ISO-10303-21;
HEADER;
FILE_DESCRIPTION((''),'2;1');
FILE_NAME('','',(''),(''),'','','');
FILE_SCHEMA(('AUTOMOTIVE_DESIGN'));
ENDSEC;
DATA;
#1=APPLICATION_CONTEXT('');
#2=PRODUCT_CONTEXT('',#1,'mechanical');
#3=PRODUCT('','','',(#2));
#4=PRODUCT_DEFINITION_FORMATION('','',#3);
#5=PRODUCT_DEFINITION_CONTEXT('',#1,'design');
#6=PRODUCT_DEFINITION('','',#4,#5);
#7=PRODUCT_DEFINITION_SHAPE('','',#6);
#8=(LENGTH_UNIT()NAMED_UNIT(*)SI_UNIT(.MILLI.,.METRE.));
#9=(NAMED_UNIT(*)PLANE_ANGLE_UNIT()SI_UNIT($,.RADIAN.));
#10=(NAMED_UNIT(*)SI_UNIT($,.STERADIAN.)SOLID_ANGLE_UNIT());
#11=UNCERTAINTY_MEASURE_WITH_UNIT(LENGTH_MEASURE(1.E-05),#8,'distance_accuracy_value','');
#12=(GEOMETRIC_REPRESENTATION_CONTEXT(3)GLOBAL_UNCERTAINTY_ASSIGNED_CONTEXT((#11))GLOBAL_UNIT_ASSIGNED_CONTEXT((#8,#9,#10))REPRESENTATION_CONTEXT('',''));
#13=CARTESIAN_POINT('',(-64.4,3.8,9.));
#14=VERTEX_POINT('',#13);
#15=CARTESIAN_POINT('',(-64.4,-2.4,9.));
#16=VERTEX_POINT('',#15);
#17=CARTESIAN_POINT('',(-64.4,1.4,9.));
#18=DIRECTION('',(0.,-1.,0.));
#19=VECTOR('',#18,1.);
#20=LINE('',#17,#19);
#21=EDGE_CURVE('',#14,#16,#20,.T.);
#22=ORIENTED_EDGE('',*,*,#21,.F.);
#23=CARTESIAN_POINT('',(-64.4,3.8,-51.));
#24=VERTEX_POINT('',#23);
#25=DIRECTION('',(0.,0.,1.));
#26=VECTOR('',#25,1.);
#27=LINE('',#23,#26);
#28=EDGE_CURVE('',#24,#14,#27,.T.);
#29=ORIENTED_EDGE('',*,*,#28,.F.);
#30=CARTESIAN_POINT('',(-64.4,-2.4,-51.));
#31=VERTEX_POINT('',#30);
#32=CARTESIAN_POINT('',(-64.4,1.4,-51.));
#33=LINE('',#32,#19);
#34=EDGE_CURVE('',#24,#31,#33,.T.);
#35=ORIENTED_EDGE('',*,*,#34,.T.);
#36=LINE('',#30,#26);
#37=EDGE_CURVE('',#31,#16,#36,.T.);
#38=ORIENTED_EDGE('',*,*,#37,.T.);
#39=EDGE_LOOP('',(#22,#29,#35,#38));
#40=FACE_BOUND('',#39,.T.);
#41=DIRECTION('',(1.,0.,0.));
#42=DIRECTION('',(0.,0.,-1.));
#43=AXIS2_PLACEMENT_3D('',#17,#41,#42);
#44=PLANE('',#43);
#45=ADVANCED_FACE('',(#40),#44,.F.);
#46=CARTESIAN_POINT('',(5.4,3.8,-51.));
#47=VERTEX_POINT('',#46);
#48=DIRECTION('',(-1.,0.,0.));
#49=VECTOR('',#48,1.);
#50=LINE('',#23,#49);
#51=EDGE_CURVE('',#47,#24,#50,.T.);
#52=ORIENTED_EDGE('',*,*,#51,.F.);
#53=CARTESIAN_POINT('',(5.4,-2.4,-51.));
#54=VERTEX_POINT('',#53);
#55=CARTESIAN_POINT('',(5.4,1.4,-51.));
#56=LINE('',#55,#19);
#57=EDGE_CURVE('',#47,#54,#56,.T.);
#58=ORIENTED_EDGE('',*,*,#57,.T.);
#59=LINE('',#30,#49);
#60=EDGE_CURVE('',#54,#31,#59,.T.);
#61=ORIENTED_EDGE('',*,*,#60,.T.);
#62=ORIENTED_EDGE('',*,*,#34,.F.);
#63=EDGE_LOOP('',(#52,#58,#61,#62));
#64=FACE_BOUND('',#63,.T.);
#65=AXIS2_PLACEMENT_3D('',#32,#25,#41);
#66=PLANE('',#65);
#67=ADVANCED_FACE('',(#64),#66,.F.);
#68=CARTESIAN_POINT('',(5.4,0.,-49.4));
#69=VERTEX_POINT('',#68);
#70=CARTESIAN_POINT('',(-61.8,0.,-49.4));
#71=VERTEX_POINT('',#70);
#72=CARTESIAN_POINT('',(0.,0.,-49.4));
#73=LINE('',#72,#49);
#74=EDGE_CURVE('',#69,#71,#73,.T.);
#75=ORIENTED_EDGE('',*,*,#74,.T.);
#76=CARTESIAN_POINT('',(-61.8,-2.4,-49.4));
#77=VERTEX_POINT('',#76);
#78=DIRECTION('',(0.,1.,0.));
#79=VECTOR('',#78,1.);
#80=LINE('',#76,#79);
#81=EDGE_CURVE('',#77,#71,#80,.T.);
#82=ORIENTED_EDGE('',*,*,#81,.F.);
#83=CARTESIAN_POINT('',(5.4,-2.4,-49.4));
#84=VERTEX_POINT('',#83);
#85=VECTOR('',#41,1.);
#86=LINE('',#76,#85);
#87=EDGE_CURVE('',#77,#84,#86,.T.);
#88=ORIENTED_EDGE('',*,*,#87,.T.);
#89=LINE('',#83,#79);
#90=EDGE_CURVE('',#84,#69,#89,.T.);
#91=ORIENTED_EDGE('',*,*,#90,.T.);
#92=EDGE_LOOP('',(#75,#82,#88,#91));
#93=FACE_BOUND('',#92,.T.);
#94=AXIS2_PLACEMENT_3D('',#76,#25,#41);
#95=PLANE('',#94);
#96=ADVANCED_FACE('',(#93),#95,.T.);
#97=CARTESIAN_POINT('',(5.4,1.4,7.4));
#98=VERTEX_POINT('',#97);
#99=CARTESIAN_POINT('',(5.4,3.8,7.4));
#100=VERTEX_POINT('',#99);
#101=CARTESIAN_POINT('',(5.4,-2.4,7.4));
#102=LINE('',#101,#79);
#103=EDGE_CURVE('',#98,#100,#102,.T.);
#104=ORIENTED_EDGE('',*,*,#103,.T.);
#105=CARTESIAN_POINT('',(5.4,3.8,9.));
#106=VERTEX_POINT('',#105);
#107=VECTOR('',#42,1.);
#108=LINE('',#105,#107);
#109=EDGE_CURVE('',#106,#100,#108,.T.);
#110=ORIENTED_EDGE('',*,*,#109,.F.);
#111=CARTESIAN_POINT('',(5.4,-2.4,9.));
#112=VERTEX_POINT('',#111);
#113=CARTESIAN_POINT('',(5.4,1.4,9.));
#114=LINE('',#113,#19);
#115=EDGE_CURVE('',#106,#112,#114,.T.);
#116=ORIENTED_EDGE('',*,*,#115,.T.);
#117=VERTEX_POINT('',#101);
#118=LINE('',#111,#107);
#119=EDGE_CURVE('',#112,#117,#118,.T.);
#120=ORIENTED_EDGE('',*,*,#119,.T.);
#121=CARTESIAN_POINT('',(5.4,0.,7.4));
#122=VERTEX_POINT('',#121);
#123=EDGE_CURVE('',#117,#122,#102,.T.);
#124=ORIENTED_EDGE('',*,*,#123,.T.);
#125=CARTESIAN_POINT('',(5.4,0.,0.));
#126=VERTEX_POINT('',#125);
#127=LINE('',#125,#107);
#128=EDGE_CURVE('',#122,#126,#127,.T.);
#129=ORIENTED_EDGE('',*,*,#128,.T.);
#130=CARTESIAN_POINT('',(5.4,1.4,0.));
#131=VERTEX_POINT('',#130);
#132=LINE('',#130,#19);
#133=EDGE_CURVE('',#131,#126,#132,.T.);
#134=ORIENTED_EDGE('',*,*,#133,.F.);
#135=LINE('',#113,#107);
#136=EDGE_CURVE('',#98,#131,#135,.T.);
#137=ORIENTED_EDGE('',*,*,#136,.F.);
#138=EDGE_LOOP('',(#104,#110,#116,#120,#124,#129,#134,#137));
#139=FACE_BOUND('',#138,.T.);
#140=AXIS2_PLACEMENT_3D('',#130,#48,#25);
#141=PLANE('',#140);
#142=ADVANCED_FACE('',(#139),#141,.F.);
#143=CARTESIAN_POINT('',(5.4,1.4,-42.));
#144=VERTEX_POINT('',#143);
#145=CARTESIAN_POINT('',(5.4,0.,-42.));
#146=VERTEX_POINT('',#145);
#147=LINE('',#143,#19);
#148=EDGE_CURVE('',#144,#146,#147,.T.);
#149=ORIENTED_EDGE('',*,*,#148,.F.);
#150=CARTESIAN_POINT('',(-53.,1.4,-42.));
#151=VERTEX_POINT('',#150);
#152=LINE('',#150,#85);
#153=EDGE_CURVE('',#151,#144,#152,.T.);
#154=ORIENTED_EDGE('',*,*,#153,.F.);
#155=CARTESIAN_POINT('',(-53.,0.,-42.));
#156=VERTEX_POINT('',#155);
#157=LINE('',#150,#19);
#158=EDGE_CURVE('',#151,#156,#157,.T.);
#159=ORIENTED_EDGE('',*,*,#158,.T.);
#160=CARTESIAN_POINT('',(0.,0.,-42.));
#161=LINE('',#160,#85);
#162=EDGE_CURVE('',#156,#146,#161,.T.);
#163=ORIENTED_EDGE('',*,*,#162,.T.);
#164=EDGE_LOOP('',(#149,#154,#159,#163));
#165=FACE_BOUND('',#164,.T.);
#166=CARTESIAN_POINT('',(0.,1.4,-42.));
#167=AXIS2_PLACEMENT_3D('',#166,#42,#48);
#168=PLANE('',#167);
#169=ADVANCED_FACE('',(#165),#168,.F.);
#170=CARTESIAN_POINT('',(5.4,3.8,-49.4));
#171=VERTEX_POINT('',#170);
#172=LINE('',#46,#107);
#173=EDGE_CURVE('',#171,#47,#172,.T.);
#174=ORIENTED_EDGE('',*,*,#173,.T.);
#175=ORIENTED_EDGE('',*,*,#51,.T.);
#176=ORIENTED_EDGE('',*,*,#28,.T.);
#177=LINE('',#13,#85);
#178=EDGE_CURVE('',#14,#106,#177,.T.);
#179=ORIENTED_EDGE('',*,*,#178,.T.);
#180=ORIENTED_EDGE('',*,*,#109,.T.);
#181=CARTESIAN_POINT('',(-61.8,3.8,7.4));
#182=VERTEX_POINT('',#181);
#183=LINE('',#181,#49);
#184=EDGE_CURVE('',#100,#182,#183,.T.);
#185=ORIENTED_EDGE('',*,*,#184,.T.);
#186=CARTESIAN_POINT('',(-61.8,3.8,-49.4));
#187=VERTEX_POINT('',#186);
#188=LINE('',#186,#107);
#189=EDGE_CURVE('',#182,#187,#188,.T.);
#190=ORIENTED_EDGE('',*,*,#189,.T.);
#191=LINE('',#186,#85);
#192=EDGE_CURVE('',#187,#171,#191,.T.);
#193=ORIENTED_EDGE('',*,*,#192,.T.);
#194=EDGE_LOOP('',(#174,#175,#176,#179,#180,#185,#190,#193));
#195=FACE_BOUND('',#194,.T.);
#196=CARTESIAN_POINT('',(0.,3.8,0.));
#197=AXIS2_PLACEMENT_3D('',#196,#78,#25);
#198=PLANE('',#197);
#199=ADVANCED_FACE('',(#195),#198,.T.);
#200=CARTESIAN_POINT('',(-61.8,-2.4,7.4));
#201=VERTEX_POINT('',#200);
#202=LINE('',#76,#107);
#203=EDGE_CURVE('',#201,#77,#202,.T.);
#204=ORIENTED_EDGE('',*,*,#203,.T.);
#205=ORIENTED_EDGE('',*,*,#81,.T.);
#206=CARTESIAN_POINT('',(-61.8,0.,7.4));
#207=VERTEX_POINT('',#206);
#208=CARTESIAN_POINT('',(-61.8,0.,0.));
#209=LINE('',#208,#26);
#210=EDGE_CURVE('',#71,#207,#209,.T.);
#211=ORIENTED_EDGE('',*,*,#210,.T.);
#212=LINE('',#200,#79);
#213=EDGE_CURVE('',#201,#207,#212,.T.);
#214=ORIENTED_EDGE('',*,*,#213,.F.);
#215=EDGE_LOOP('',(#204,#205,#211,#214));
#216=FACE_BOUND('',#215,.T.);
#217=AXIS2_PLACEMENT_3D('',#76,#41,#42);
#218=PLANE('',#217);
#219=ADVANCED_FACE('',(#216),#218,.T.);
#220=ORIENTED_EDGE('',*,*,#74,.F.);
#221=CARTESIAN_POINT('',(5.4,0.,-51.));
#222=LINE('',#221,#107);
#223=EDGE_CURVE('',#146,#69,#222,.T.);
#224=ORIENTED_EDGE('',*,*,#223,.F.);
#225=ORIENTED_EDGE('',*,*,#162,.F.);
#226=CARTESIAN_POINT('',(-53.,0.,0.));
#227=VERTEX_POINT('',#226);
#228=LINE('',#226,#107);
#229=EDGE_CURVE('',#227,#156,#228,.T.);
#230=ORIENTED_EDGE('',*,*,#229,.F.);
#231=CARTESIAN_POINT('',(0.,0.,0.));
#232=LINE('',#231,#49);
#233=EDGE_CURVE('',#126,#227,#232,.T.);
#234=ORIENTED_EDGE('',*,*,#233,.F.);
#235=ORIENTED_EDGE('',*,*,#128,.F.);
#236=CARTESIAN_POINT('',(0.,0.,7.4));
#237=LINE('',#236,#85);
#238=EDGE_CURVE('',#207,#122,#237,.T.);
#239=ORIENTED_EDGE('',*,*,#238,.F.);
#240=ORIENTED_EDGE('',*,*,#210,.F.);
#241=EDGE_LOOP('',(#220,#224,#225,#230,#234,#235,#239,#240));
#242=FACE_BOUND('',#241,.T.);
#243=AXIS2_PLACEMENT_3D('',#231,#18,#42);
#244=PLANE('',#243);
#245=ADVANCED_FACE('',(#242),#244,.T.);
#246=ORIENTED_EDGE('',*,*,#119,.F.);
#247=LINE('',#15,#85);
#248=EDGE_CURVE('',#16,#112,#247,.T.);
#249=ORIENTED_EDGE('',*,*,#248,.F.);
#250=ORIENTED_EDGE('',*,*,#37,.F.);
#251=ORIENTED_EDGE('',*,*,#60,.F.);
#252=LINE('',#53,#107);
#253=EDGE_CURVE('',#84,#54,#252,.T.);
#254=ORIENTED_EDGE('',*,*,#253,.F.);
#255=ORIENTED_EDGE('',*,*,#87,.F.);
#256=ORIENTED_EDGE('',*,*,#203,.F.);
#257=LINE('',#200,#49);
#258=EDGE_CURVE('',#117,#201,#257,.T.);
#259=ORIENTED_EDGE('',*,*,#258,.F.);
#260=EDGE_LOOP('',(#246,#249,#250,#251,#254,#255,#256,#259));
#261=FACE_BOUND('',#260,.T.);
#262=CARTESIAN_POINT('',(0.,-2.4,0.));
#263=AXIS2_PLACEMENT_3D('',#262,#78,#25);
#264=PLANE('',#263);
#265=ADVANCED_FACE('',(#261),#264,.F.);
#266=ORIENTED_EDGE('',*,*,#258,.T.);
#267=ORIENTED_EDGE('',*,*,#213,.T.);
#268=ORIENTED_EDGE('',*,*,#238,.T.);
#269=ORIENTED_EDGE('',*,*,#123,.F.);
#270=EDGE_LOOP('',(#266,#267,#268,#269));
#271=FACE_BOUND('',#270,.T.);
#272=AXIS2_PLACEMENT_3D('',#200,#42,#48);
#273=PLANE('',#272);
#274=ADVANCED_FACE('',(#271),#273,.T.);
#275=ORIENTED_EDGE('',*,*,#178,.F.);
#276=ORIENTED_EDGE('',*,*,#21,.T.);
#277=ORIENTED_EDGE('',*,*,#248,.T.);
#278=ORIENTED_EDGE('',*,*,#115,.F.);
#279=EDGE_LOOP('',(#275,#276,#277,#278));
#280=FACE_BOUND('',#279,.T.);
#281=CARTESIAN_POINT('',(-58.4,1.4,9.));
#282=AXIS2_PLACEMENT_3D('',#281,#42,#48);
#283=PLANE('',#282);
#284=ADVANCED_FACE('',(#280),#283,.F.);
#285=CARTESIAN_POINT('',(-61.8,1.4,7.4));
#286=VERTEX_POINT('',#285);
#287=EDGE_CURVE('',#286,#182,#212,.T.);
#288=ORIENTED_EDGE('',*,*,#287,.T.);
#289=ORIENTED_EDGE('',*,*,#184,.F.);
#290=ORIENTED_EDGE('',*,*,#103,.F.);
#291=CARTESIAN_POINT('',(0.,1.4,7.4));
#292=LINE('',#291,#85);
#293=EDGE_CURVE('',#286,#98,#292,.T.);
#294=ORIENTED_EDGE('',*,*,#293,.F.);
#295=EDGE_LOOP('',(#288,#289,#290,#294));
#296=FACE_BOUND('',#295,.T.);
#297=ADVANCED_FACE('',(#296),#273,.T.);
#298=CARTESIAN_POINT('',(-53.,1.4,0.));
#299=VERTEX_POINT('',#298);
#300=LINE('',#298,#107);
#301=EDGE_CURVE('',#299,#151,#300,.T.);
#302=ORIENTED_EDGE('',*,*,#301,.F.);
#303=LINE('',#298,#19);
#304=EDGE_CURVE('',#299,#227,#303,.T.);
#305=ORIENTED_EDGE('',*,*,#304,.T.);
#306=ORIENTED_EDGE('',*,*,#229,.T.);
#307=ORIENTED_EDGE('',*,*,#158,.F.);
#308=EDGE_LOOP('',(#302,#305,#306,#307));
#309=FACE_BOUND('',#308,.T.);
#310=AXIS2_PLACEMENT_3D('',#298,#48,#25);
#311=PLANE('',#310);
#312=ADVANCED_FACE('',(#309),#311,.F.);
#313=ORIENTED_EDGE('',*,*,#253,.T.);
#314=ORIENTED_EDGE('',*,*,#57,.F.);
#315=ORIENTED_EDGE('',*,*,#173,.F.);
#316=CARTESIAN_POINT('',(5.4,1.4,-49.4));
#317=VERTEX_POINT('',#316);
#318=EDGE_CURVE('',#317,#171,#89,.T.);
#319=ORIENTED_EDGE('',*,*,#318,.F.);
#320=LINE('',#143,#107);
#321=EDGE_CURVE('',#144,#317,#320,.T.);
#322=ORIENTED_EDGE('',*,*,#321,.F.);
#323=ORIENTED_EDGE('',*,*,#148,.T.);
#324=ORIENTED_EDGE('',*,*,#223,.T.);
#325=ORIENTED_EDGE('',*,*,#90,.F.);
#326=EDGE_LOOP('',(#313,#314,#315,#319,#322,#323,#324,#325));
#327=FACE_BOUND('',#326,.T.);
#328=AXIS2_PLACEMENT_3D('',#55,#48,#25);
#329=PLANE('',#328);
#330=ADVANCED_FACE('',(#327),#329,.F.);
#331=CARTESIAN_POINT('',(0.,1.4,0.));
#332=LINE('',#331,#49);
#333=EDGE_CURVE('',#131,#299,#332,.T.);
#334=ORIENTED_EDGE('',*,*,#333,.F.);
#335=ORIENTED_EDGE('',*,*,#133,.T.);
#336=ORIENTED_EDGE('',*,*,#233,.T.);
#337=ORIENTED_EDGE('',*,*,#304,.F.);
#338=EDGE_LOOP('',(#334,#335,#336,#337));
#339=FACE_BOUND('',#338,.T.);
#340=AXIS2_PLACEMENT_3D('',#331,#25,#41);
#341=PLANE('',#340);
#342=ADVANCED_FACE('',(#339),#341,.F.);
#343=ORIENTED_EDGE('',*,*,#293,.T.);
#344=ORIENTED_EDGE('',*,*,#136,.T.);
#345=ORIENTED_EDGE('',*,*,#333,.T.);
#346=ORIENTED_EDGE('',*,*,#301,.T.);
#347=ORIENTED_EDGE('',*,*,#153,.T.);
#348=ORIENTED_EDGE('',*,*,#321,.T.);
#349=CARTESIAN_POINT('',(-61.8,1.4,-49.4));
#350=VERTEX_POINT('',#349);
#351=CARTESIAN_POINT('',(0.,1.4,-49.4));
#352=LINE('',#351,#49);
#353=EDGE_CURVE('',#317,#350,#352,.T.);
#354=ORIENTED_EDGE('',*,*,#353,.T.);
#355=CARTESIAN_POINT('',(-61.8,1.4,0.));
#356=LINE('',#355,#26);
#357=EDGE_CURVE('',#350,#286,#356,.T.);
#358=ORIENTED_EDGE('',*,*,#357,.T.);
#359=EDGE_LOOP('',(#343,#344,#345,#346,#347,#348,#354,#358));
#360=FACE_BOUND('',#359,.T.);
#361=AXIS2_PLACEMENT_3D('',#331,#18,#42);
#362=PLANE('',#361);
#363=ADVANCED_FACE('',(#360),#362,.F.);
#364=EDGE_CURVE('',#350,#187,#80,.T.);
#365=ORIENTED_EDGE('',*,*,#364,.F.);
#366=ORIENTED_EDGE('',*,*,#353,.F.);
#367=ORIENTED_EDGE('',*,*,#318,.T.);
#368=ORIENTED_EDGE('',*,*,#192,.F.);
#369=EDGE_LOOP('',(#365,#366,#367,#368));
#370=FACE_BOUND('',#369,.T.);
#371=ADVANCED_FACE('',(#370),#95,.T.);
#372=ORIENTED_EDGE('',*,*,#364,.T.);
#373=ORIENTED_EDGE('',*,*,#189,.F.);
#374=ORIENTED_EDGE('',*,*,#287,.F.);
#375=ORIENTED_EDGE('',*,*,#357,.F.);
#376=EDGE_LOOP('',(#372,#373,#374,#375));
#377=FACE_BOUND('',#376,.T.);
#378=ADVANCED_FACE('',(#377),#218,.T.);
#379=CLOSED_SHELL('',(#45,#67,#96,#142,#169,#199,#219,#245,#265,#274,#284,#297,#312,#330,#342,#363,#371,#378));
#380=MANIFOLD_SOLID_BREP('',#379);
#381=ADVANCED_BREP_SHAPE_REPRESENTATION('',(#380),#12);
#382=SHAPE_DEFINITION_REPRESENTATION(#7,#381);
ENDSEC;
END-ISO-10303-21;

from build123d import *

# Parameters (mm, degrees)
BOSS_EXTRUDE1_DEPTH      = 1.4
BOSS_EXTRUDE2_DEPTH      = 2.4
BOSS_EXTRUDE2_DEPTH_BACK = 3.8


with BuildPart() as part:
    # Sketch1 → Boss-Extrude1 (new body)
    with BuildSketch(Plane(origin=(0, 0, 0), x_dir=(1, 0, 0), z_dir=(0, 1, 0))):
        Polygon((0, 0), (5.4, 0), (5.4, -7), (5.4, -9), (-58.4, -9), (-61.4, -9), (-64.4, -9), (-64.4, 51), (-61.4, 51), (-58.4, 51), (5.4, 51), (5.4, 49), (5.4, 42), (0, 42), (-53, 42), (-53, 0), align=None)
    extrude(amount=BOSS_EXTRUDE1_DEPTH)

    # Sketch2 → Boss-Extrude2 (add, two sides: drawn at the far end of the back side and taken through both)
    with BuildSketch(Plane(origin=(0, 1.4, 0), x_dir=(1, 0, 0), z_dir=(0, 1, 0)).offset(-BOSS_EXTRUDE2_DEPTH_BACK)):
        Polygon((-64.4, 51), (5.4, 51), (5.4, 49.4), (-61.8, 49.4), (-61.8, -7.4), (5.4, -7.4), (5.4, -9), (-64.4, -9), align=None)
    extrude(amount=BOSS_EXTRUDE2_DEPTH + BOSS_EXTRUDE2_DEPTH_BACK)


solid = part.part
